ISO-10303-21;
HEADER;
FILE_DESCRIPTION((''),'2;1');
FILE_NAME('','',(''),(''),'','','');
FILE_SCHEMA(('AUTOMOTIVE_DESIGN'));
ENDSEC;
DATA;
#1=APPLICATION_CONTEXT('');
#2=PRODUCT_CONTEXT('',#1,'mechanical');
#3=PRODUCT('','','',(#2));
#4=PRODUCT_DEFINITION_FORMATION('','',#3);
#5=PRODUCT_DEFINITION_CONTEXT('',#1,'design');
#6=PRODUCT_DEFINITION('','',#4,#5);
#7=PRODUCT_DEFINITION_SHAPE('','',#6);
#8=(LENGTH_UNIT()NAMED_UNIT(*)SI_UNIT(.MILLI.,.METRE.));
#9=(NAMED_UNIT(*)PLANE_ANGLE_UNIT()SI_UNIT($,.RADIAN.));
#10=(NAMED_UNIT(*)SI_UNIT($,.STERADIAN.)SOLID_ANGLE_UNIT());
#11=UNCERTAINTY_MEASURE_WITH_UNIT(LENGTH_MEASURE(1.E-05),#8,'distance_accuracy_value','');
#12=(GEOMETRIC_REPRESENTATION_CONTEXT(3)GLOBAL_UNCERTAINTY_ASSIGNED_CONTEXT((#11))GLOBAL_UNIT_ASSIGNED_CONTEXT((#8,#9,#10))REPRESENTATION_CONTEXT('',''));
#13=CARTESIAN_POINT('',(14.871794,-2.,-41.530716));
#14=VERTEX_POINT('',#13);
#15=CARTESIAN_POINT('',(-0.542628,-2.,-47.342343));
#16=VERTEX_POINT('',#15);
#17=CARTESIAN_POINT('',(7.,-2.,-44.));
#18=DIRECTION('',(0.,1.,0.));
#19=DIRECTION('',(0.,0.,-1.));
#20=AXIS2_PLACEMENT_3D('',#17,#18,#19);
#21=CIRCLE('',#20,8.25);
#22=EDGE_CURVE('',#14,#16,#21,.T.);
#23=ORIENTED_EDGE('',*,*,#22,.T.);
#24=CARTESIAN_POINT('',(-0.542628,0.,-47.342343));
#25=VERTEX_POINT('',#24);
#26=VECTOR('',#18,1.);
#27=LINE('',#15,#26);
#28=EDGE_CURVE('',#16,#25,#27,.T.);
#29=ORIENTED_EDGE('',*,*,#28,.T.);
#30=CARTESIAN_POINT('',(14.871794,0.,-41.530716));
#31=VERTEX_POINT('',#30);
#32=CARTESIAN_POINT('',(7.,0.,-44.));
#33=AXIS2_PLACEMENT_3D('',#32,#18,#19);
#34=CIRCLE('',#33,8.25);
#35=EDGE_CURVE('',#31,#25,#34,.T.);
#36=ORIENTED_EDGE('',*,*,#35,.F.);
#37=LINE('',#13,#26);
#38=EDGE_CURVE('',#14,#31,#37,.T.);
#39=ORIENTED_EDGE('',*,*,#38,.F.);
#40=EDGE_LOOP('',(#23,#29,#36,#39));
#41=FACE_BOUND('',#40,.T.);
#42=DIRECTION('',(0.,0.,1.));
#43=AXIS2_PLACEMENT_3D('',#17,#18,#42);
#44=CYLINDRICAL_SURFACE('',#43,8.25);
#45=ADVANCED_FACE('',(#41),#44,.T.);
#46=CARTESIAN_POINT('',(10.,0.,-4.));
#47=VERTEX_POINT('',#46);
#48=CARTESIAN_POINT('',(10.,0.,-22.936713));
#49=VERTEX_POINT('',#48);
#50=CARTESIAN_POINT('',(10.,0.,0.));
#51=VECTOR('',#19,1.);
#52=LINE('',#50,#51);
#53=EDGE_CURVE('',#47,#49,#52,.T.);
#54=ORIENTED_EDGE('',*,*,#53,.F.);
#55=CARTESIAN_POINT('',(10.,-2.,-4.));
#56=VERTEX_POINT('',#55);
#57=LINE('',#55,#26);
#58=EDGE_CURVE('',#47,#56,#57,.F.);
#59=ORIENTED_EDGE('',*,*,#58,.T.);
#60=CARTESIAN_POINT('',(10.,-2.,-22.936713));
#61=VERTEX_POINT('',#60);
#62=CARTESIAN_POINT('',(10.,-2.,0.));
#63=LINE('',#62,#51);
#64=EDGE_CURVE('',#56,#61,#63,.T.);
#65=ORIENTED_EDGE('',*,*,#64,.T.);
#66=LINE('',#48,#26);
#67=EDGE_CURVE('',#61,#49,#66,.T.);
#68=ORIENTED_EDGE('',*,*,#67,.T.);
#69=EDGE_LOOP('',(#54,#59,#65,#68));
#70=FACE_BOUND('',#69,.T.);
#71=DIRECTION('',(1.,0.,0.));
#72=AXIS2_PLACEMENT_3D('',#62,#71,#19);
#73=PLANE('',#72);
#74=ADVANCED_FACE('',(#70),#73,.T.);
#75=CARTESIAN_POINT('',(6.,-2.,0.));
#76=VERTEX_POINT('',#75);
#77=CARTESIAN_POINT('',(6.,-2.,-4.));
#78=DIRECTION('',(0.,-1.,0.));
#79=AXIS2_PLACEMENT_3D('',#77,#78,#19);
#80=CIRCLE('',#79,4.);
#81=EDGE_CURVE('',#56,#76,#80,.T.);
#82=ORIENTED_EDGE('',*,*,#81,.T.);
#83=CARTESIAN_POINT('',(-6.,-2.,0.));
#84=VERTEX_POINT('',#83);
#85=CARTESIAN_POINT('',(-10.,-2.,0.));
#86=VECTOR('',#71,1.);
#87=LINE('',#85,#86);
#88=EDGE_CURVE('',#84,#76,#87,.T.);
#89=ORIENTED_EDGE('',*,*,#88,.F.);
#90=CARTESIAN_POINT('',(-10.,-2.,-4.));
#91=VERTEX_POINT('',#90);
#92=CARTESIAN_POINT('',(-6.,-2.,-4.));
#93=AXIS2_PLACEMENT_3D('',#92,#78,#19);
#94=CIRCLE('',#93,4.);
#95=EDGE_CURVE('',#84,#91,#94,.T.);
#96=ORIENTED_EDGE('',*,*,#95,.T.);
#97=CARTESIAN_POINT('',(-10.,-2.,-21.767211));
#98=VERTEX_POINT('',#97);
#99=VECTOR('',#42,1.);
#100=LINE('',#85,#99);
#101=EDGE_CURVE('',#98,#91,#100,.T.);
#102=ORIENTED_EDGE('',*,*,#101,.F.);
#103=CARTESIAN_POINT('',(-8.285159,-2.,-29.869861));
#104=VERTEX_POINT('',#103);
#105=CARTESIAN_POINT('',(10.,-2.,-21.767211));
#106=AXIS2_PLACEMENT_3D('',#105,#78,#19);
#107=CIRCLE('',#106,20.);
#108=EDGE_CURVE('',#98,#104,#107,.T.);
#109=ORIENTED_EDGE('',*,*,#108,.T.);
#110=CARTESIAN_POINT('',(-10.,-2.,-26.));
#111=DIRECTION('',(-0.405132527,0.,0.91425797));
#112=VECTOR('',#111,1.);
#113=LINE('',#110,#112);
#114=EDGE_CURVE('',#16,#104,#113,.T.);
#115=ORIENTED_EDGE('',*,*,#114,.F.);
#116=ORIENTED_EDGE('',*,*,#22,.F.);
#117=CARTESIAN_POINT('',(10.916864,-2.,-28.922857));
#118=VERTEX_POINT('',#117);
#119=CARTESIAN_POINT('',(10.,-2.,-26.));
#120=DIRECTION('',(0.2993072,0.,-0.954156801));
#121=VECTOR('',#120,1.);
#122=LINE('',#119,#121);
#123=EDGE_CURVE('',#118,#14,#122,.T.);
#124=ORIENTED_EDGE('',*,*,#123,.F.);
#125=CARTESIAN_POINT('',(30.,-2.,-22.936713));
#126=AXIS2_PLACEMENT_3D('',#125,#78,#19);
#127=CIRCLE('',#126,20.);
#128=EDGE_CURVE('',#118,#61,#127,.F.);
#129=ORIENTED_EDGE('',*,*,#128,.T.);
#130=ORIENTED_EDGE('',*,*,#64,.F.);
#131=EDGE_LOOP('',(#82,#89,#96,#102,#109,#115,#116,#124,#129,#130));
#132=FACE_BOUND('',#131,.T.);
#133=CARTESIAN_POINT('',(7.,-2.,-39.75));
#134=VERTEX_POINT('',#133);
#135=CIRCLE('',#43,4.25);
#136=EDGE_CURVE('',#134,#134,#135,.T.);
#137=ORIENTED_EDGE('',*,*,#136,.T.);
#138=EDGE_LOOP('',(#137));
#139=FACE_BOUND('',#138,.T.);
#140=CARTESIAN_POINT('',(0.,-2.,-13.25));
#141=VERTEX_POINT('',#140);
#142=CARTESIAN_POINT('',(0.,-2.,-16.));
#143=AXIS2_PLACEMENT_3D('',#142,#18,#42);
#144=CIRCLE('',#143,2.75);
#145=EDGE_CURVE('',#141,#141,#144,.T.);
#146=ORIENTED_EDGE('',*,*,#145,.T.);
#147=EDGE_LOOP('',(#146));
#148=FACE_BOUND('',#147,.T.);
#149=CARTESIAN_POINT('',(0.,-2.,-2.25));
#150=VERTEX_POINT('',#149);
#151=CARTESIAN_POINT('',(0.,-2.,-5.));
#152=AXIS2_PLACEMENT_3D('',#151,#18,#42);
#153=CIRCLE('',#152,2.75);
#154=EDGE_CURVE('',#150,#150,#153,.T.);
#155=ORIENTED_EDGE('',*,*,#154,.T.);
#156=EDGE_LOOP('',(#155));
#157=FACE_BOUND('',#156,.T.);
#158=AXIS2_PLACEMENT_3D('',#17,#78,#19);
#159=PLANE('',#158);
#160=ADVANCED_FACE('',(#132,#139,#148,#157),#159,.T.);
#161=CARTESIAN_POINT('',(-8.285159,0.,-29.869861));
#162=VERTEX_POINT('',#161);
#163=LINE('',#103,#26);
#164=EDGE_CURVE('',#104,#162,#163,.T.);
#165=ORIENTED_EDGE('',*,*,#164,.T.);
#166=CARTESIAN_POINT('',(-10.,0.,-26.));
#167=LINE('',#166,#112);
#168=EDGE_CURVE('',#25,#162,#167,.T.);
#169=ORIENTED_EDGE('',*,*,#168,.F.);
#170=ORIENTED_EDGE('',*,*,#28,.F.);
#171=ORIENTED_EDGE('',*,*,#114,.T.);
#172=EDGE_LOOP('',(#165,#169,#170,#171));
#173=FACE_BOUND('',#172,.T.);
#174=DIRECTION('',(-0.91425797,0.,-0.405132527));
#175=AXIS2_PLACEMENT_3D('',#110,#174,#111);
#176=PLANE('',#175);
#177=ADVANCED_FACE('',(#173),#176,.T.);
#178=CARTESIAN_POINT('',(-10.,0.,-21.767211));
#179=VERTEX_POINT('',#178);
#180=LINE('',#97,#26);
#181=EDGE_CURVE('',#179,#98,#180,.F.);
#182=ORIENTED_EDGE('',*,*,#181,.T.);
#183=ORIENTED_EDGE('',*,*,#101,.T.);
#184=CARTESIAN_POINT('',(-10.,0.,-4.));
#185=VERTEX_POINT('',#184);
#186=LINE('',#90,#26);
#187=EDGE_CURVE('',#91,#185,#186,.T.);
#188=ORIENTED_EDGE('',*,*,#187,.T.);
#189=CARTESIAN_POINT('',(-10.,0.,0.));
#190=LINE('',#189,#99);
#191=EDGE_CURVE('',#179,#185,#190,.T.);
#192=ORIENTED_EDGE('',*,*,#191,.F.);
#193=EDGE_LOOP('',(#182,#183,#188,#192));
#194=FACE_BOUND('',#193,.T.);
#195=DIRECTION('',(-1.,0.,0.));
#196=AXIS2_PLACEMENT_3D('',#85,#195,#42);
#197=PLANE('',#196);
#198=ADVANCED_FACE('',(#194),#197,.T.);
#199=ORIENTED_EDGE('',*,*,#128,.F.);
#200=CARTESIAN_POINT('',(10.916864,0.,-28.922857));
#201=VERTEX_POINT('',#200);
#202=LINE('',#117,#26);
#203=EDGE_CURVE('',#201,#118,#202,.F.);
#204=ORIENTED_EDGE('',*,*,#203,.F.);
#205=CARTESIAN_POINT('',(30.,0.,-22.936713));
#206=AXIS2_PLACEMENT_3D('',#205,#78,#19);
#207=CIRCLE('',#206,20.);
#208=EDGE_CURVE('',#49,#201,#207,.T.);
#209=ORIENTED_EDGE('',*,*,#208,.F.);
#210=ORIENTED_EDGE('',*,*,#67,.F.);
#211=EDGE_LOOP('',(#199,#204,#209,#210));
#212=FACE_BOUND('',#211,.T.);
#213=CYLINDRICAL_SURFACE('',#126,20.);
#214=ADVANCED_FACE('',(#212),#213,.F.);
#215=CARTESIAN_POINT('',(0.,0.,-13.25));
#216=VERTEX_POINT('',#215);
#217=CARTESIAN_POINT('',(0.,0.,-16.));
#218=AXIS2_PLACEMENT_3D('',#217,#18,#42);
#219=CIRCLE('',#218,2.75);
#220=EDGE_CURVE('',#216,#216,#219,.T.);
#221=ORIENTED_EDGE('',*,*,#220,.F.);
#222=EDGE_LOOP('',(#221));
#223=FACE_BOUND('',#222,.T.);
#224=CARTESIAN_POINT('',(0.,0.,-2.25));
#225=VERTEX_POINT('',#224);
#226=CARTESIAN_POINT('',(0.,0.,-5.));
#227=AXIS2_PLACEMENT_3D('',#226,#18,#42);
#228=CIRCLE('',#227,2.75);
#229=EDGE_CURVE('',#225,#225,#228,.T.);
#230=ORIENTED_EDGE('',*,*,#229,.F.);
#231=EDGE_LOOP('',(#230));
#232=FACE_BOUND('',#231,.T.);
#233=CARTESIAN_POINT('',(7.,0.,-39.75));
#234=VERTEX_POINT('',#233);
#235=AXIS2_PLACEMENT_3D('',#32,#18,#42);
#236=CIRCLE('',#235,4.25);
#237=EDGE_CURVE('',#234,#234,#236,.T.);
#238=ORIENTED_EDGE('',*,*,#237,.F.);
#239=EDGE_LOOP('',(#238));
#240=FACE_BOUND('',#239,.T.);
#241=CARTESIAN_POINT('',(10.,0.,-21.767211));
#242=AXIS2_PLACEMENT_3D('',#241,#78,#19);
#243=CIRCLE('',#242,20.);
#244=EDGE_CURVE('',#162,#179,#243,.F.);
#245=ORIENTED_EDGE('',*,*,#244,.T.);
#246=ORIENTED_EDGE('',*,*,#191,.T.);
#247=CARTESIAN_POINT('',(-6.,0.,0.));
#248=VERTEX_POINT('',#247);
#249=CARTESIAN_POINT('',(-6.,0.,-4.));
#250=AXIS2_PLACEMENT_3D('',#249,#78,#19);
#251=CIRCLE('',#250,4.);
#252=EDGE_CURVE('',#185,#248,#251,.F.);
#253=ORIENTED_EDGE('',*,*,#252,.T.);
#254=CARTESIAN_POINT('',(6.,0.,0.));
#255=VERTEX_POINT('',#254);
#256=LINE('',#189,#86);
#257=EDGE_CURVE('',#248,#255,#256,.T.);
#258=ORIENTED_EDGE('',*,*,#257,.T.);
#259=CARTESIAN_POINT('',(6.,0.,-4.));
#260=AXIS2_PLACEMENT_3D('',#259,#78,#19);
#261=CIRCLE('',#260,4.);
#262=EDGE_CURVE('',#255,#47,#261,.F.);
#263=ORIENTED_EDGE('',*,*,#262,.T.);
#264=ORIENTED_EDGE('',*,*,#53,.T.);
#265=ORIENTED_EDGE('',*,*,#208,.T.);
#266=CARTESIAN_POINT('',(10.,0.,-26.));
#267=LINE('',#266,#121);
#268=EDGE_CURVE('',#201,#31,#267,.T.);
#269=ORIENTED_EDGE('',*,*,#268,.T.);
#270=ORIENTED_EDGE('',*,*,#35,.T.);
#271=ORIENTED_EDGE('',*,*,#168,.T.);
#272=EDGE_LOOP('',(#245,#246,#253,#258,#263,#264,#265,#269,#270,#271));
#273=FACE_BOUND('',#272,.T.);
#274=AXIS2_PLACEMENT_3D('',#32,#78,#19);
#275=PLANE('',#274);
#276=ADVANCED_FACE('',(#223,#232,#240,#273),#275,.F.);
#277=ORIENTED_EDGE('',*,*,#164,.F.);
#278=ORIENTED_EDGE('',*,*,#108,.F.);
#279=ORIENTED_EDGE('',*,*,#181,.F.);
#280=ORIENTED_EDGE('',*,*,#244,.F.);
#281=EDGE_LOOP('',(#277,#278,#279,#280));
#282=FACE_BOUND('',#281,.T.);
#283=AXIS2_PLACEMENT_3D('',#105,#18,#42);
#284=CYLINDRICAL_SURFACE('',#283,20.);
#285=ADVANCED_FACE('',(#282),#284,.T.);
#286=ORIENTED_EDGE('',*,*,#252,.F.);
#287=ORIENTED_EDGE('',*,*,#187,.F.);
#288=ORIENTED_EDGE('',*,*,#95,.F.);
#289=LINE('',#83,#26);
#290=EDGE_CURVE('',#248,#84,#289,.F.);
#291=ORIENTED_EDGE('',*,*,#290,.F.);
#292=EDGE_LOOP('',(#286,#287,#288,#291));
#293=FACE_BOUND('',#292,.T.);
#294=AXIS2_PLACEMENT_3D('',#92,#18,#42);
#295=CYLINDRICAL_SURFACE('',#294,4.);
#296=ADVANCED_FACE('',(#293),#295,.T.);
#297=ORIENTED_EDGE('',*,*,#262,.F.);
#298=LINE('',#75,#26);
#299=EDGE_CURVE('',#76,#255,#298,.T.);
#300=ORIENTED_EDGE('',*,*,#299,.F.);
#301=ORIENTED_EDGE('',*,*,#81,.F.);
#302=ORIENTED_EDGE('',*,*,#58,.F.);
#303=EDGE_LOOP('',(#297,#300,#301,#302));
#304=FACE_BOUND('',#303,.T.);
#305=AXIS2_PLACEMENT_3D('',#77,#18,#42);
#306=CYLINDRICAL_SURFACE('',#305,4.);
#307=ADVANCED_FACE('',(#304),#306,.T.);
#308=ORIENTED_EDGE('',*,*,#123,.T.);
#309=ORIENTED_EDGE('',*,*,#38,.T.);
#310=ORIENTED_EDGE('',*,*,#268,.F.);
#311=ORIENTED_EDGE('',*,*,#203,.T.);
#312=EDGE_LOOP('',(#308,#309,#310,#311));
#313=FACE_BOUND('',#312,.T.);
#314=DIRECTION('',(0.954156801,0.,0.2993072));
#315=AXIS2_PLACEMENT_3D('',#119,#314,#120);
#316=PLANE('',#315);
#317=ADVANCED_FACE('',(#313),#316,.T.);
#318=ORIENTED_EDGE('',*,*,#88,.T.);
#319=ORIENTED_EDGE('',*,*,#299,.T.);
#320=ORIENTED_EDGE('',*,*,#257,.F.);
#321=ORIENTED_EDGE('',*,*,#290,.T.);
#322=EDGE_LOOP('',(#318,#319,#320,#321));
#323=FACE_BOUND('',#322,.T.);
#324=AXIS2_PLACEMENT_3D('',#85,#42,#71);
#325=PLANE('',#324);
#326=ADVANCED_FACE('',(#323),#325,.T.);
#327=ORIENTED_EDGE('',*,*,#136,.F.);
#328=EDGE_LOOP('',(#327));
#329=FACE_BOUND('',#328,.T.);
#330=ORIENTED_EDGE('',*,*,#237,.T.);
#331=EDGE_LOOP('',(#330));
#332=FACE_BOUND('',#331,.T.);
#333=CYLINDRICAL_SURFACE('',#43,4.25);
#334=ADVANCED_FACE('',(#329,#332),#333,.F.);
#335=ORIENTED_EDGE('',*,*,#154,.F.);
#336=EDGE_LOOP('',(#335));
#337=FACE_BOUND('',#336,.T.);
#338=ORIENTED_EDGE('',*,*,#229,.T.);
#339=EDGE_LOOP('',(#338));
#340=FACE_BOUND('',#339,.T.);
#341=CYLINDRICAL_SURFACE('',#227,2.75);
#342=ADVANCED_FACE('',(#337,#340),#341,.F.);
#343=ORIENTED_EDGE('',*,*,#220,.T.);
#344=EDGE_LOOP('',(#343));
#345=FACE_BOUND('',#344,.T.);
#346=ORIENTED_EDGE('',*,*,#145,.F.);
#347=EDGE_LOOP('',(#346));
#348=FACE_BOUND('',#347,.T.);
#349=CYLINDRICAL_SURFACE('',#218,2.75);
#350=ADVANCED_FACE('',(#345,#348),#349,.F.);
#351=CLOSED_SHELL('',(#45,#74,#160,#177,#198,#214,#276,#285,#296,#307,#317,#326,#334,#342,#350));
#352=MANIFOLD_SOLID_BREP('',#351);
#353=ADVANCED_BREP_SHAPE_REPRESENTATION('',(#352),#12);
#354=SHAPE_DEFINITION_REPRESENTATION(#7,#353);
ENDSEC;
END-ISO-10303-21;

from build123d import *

# Parameters (mm, degrees)
SKETCH1_R            = 4.25
BASE_FLANGE1_DEPTH   = 2
FILLET1_R            = 20
M5_CLEARANCE_HOLE1_D = 5.5
FILLET2_R            = 4


# Sheet-metal steps are written as plain solids
with BuildPart() as part:
    # Sketch1 → Base-Flange1 (new body)
    with BuildSketch(Plane(origin=(0, 0, 0), x_dir=(1, 0, 0), z_dir=(0, 1, 0))):
        with BuildLine():
            Line((-10, 0), (10, 0))
            Line((10, 0), (10, 26))
            Line((10, 26), (14.871793605, 41.530715601))
            ThreePointArc((14.871793605, 41.530715601), (9.910471049, 51.719563347), (-0.542628251, 47.342343349))
            Line((-0.542628251, 47.342343349), (-10, 26))
            Line((-10, 26), (-10, 0))
        make_face()
        with Locations(Location((7, 44, 0), (0, 0, 270))):
            Circle(SKETCH1_R, mode=Mode.SUBTRACT)
    extrude(amount=-BASE_FLANGE1_DEPTH)

    # Fillet1
    fillet1_edges = [part.edges().sort_by_distance(p)[0] for p in [
        (-10, -1, -26),
        (10, -1, -26),
    ]]
    fillet(fillet1_edges, radius=FILLET1_R)

    # M5 Clearance Hole1 (through all)
    with Locations(Plane(origin=(0, 0, 0), x_dir=(1, 0, 0), z_dir=(0, 1, 0))):
        with Locations((0, 16), (0, 5)):
            Hole(M5_CLEARANCE_HOLE1_D / 2)

    # Fillet2
    fillet2_edges = [part.edges().sort_by_distance(p)[0] for p in [
        (10, -1, 0),
        (-10, -1, 0),
    ]]
    fillet(fillet2_edges, radius=FILLET2_R)


solid = part.part
